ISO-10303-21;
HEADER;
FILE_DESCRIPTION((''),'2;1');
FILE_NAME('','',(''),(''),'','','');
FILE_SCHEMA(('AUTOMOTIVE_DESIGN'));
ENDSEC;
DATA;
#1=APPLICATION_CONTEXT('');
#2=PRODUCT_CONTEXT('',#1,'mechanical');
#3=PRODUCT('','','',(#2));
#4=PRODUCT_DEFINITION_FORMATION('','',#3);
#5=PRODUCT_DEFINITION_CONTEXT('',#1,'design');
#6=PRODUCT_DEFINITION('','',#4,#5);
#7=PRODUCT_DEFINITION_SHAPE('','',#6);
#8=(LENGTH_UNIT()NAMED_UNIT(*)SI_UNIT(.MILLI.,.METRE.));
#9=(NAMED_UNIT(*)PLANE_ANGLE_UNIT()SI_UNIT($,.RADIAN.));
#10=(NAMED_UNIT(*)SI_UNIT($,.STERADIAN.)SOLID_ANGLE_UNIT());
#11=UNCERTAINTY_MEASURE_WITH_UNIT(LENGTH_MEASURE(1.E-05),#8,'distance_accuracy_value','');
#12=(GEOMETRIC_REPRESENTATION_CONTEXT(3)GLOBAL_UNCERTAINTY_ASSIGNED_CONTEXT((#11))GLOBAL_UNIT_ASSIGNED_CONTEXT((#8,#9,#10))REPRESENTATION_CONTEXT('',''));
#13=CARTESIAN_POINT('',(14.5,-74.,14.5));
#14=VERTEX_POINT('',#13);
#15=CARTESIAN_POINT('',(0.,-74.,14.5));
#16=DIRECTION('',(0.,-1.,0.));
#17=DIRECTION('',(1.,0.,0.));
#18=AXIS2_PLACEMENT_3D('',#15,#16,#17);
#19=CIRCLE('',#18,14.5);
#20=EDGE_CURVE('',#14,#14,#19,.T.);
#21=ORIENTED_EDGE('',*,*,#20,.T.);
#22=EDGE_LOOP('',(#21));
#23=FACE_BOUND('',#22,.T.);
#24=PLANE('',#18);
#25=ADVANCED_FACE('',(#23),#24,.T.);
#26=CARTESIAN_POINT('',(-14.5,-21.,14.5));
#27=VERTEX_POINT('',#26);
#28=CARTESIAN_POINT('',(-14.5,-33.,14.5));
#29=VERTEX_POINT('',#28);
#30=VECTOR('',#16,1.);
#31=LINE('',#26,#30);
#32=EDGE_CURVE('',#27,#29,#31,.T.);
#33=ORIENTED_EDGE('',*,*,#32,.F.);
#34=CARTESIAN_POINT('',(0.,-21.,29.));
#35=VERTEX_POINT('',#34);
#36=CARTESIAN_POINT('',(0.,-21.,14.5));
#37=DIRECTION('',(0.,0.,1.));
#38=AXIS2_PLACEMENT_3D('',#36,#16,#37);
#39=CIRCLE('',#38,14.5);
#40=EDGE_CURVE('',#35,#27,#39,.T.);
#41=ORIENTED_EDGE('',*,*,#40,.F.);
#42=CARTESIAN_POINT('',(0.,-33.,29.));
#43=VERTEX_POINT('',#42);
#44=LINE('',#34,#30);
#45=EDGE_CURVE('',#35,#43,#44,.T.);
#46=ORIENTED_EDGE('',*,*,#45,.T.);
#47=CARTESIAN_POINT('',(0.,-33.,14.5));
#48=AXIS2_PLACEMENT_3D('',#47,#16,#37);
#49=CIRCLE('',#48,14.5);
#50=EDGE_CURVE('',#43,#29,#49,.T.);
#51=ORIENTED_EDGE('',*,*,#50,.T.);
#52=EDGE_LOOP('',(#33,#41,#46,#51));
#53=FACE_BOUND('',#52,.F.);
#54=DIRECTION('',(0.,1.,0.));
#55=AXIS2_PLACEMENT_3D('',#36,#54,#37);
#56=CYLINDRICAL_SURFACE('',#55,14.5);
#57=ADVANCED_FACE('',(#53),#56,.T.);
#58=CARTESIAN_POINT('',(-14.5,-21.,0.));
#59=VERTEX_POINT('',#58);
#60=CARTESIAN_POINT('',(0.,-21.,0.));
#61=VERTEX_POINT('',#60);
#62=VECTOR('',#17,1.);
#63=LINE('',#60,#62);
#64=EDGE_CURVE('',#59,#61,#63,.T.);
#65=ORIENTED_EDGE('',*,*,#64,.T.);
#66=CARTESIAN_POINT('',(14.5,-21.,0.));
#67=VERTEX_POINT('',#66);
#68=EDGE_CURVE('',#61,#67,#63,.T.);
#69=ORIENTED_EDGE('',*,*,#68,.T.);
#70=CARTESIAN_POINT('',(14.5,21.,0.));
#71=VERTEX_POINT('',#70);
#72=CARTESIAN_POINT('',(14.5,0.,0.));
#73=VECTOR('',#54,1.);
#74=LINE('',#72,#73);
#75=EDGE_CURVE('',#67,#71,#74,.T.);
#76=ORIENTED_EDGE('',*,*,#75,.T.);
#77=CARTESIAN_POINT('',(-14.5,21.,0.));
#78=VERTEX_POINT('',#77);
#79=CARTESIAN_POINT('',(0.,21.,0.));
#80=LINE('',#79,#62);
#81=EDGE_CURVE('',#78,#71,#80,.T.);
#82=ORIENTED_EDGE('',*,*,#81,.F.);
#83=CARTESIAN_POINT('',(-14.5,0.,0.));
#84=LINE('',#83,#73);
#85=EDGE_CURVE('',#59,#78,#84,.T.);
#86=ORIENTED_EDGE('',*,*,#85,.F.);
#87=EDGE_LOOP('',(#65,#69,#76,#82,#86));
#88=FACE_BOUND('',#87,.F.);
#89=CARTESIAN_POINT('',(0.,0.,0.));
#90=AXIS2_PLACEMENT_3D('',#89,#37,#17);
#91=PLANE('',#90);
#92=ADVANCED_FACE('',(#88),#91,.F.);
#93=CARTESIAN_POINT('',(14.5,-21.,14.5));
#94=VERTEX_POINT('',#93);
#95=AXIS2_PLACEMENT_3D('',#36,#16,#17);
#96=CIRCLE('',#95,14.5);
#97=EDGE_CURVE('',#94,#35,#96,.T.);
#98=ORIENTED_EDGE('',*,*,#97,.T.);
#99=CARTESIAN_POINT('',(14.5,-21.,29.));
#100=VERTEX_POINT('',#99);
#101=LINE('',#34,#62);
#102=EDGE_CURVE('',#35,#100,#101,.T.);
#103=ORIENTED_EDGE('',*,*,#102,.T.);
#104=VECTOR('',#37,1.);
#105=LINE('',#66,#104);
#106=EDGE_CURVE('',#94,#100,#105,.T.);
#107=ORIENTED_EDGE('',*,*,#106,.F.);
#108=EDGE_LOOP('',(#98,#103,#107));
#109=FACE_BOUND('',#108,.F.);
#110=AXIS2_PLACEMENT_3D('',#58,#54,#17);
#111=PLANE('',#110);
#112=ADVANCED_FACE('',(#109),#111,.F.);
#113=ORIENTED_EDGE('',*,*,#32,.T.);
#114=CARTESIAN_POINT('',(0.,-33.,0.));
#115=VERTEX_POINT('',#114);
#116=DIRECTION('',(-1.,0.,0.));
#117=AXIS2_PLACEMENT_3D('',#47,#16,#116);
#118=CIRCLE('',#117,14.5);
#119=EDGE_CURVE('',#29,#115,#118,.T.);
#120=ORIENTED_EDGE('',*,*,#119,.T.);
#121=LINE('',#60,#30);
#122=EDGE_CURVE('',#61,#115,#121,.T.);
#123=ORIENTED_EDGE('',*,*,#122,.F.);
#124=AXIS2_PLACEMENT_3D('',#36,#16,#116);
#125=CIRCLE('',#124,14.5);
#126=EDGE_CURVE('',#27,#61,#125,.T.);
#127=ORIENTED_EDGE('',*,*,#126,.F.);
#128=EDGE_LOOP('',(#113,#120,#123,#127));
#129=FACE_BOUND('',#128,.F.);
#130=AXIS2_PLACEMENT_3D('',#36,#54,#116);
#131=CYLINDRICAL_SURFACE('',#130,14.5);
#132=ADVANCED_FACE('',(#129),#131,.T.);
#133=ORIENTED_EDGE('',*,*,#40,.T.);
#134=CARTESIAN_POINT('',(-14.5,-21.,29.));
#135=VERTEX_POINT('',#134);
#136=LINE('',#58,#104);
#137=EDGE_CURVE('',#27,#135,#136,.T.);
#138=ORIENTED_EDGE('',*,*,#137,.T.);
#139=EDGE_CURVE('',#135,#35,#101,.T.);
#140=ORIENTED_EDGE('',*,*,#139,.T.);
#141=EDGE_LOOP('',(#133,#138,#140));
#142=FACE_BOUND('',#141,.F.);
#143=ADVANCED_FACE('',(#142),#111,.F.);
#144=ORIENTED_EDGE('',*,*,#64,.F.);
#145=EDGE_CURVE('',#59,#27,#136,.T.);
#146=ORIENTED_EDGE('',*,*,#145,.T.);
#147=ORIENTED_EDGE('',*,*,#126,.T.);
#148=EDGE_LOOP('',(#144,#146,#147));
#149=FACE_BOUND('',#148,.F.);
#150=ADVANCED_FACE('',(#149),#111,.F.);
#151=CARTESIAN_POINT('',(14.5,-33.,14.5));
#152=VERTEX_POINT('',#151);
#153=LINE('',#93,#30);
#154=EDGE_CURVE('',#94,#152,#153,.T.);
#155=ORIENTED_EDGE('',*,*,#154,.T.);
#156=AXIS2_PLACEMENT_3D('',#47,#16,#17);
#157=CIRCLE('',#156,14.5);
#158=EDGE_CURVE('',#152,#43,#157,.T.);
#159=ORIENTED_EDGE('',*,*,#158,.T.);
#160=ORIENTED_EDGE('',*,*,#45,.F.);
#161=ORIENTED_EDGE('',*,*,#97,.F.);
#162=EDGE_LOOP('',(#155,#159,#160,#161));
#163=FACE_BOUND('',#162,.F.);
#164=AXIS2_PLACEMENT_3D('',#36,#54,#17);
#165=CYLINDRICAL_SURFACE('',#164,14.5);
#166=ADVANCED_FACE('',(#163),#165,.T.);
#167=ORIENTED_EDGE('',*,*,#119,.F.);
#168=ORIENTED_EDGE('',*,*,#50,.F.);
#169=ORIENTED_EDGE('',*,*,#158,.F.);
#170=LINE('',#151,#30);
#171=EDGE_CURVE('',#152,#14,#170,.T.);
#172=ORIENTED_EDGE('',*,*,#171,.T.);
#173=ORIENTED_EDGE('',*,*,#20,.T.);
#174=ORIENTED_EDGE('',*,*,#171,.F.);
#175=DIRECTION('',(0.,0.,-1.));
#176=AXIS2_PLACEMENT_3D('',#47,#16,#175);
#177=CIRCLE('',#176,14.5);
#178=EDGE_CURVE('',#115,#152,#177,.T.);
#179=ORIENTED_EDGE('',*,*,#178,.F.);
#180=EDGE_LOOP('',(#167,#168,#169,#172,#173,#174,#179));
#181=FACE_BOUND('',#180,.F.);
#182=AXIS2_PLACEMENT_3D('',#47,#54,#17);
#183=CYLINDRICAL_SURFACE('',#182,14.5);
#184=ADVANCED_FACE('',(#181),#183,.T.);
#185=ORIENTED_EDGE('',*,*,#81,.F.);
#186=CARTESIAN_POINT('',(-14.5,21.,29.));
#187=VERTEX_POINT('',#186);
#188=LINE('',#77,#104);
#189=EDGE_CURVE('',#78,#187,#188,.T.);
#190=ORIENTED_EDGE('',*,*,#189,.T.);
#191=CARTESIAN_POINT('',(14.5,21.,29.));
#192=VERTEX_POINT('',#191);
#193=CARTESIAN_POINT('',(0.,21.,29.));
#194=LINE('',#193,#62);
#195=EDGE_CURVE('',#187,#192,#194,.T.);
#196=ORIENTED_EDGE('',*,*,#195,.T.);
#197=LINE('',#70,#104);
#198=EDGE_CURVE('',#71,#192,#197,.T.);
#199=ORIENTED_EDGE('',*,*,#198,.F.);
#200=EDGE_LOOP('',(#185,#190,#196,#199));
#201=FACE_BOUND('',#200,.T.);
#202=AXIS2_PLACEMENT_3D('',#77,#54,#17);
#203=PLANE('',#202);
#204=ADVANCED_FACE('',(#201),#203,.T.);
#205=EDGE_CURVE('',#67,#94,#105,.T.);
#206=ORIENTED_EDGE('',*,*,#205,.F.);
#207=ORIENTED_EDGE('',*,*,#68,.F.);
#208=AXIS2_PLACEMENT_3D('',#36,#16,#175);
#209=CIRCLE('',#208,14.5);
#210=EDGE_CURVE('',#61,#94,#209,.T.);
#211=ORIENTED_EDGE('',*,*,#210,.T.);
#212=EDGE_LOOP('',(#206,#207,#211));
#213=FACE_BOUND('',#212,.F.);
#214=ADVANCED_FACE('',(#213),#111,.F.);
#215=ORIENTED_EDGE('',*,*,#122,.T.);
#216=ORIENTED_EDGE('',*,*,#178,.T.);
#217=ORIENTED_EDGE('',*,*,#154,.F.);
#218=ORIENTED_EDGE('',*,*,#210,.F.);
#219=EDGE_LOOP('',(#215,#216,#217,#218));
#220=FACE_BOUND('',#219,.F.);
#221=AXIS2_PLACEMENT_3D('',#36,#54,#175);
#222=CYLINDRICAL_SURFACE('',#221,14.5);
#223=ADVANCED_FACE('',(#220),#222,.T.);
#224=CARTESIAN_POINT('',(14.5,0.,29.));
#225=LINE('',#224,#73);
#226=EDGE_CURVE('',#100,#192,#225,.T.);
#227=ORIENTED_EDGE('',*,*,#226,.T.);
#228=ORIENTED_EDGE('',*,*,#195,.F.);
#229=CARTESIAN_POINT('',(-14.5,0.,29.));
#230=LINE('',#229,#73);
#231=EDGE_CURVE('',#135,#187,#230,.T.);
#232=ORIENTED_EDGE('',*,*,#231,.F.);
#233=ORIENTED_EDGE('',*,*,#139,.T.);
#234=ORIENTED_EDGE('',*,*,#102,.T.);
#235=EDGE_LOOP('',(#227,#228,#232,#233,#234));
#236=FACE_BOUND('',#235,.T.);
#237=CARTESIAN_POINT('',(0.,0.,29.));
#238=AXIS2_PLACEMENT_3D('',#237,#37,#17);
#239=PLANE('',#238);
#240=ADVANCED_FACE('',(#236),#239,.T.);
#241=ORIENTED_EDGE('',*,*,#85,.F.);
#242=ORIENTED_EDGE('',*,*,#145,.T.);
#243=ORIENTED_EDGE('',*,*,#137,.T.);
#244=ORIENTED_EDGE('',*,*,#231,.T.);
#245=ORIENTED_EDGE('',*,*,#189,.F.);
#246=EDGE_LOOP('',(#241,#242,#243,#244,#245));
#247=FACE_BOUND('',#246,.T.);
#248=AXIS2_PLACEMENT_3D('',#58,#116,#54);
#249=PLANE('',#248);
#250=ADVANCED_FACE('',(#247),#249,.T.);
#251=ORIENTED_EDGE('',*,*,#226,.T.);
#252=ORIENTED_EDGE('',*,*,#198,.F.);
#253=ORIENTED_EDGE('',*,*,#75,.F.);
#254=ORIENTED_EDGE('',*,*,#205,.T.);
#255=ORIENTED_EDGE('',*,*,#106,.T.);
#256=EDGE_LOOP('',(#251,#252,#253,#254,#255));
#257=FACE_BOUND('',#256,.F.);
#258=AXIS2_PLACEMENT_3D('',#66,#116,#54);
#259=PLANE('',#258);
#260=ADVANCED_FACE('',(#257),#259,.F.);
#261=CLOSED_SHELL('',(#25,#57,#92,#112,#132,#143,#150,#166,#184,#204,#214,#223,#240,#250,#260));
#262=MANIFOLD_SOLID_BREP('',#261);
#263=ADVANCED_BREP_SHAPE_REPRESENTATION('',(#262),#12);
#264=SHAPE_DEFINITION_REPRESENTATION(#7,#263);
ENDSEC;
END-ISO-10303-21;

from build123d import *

# Parameters (mm, degrees)
F0_W     = 29
F0_H     = 42
F1_DEPTH = 29
F3_DEPTH = 12
F4_R     = 14.5
F5_DEPTH = 41


# Not quite as in the source:
# - the program builds the solid bodies; features that only make, move or delete a surface that nothing else refers to are left out


with BuildPart() as f1:
    # F0 (on Top) → F1 (new body)
    with BuildSketch(Plane.XY):
        Rectangle(F0_W, F0_H)
    extrude(amount=F1_DEPTH)

    # F2 (on face) → F3 (join)
    with BuildSketch(Plane.XZ.offset(21)):
        with BuildLine():
            ThreePointArc((0, 0), (10.2530483272, 4.2469516728), (14.5, 14.5))
            ThreePointArc((14.5, 14.5), (10.2530483272, 24.7530483272), (0, 29))
            ThreePointArc((0, 29), (-10.2530483272, 24.7530483272), (-14.5, 14.5))
            ThreePointArc((-14.5, 14.5), (-10.2530483272, 4.2469516728), (0, 0))
        make_face()
    extrude(amount=F3_DEPTH)

    # F4 (on face) → F5 (join)
    with BuildSketch(Plane.XZ.offset(33)):
        with Locations((0, 14.5)):
            Circle(F4_R)
    extrude(amount=F5_DEPTH)


solid = f1.part
